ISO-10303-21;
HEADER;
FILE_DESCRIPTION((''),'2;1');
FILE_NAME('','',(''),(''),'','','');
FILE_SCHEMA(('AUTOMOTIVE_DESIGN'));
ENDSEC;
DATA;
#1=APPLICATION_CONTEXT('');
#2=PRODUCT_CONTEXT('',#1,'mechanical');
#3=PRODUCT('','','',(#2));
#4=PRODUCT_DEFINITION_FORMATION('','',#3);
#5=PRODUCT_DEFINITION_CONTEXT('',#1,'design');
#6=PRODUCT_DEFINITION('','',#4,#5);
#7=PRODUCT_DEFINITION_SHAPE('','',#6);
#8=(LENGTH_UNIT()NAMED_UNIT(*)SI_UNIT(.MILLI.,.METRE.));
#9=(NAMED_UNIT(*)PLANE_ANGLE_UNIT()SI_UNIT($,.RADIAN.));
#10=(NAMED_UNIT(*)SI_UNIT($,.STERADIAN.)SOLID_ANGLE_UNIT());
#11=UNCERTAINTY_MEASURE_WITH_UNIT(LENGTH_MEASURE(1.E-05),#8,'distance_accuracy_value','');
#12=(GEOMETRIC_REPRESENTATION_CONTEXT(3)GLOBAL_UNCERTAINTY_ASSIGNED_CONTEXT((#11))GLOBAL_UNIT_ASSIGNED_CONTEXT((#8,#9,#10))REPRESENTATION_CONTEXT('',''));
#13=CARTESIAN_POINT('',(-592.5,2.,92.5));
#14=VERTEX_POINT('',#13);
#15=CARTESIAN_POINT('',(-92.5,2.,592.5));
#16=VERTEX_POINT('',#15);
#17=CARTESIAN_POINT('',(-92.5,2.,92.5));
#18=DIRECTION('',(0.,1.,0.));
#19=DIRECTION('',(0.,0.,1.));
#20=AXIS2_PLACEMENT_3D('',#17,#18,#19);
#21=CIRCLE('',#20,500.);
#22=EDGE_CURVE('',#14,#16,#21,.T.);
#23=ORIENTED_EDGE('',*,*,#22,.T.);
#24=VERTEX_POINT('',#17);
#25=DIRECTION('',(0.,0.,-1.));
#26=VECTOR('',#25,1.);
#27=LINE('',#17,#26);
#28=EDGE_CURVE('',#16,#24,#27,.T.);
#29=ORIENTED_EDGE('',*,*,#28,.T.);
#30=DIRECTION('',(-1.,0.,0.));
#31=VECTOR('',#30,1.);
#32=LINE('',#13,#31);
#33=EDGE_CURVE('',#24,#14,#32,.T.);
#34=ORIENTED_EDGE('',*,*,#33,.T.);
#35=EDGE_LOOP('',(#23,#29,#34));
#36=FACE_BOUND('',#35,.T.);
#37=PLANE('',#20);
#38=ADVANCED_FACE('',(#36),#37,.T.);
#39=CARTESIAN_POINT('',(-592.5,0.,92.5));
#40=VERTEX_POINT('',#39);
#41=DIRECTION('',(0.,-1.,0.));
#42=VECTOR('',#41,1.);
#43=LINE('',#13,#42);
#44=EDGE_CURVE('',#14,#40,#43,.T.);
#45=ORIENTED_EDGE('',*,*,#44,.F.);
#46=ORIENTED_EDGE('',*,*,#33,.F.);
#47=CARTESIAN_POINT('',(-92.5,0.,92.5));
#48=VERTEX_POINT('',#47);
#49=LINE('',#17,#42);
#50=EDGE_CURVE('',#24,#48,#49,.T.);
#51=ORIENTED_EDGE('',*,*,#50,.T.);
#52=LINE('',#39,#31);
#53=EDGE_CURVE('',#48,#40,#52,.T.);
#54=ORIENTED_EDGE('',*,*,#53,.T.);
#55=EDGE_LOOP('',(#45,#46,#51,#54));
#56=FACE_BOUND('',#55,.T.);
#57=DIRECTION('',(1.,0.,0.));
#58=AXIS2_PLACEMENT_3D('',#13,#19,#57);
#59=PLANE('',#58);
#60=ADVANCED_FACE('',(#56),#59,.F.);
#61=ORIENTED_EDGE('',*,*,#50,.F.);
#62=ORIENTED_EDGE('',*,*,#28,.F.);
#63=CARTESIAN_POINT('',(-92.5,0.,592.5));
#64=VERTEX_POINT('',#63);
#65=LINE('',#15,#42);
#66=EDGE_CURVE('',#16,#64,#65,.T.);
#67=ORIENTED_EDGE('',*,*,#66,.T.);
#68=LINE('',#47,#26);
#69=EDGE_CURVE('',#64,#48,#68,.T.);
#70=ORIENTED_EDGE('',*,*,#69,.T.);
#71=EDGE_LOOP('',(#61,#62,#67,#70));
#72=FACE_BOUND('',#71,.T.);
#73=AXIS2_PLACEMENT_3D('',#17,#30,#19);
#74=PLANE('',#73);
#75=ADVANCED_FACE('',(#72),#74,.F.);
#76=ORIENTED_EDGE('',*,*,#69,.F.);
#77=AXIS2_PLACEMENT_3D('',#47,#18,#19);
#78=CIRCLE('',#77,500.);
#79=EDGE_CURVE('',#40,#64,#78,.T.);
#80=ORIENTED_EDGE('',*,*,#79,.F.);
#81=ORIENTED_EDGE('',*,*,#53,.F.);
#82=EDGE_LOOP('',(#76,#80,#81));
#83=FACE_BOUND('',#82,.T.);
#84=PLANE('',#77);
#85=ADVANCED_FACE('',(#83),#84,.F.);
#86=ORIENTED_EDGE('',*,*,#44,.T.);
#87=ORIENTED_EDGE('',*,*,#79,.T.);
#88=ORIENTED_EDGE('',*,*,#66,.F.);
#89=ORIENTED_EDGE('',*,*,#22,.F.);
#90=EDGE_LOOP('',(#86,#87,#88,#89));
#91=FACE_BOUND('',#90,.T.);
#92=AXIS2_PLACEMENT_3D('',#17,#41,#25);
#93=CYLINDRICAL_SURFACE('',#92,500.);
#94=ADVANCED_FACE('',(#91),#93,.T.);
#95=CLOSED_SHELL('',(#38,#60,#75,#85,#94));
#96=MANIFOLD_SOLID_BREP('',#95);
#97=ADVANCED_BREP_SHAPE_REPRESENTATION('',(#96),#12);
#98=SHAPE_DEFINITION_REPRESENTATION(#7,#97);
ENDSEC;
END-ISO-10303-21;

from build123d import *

# Parameters (mm, degrees)
SM_BASE_FLANGE_1_DEPTH = 2


# Sheet-metal steps are written as plain solids
with BuildPart() as part:
    # Sketch 1 → 基体-法兰1 (new body)
    with BuildSketch(Plane(origin=(0, 0, 0), x_dir=(1, 0, 0), z_dir=(0, 1, 0))):
        with BuildLine():
            Line((-592.5, -92.5), (-92.5, -92.5))
            Line((-92.5, -92.5), (-92.5, -592.5))
            ThreePointArc((-92.5, -592.5), (-446.053390593, -446.053390593), (-592.5, -92.5))
        make_face()
    extrude(amount=SM_BASE_FLANGE_1_DEPTH)


solid = part.part
